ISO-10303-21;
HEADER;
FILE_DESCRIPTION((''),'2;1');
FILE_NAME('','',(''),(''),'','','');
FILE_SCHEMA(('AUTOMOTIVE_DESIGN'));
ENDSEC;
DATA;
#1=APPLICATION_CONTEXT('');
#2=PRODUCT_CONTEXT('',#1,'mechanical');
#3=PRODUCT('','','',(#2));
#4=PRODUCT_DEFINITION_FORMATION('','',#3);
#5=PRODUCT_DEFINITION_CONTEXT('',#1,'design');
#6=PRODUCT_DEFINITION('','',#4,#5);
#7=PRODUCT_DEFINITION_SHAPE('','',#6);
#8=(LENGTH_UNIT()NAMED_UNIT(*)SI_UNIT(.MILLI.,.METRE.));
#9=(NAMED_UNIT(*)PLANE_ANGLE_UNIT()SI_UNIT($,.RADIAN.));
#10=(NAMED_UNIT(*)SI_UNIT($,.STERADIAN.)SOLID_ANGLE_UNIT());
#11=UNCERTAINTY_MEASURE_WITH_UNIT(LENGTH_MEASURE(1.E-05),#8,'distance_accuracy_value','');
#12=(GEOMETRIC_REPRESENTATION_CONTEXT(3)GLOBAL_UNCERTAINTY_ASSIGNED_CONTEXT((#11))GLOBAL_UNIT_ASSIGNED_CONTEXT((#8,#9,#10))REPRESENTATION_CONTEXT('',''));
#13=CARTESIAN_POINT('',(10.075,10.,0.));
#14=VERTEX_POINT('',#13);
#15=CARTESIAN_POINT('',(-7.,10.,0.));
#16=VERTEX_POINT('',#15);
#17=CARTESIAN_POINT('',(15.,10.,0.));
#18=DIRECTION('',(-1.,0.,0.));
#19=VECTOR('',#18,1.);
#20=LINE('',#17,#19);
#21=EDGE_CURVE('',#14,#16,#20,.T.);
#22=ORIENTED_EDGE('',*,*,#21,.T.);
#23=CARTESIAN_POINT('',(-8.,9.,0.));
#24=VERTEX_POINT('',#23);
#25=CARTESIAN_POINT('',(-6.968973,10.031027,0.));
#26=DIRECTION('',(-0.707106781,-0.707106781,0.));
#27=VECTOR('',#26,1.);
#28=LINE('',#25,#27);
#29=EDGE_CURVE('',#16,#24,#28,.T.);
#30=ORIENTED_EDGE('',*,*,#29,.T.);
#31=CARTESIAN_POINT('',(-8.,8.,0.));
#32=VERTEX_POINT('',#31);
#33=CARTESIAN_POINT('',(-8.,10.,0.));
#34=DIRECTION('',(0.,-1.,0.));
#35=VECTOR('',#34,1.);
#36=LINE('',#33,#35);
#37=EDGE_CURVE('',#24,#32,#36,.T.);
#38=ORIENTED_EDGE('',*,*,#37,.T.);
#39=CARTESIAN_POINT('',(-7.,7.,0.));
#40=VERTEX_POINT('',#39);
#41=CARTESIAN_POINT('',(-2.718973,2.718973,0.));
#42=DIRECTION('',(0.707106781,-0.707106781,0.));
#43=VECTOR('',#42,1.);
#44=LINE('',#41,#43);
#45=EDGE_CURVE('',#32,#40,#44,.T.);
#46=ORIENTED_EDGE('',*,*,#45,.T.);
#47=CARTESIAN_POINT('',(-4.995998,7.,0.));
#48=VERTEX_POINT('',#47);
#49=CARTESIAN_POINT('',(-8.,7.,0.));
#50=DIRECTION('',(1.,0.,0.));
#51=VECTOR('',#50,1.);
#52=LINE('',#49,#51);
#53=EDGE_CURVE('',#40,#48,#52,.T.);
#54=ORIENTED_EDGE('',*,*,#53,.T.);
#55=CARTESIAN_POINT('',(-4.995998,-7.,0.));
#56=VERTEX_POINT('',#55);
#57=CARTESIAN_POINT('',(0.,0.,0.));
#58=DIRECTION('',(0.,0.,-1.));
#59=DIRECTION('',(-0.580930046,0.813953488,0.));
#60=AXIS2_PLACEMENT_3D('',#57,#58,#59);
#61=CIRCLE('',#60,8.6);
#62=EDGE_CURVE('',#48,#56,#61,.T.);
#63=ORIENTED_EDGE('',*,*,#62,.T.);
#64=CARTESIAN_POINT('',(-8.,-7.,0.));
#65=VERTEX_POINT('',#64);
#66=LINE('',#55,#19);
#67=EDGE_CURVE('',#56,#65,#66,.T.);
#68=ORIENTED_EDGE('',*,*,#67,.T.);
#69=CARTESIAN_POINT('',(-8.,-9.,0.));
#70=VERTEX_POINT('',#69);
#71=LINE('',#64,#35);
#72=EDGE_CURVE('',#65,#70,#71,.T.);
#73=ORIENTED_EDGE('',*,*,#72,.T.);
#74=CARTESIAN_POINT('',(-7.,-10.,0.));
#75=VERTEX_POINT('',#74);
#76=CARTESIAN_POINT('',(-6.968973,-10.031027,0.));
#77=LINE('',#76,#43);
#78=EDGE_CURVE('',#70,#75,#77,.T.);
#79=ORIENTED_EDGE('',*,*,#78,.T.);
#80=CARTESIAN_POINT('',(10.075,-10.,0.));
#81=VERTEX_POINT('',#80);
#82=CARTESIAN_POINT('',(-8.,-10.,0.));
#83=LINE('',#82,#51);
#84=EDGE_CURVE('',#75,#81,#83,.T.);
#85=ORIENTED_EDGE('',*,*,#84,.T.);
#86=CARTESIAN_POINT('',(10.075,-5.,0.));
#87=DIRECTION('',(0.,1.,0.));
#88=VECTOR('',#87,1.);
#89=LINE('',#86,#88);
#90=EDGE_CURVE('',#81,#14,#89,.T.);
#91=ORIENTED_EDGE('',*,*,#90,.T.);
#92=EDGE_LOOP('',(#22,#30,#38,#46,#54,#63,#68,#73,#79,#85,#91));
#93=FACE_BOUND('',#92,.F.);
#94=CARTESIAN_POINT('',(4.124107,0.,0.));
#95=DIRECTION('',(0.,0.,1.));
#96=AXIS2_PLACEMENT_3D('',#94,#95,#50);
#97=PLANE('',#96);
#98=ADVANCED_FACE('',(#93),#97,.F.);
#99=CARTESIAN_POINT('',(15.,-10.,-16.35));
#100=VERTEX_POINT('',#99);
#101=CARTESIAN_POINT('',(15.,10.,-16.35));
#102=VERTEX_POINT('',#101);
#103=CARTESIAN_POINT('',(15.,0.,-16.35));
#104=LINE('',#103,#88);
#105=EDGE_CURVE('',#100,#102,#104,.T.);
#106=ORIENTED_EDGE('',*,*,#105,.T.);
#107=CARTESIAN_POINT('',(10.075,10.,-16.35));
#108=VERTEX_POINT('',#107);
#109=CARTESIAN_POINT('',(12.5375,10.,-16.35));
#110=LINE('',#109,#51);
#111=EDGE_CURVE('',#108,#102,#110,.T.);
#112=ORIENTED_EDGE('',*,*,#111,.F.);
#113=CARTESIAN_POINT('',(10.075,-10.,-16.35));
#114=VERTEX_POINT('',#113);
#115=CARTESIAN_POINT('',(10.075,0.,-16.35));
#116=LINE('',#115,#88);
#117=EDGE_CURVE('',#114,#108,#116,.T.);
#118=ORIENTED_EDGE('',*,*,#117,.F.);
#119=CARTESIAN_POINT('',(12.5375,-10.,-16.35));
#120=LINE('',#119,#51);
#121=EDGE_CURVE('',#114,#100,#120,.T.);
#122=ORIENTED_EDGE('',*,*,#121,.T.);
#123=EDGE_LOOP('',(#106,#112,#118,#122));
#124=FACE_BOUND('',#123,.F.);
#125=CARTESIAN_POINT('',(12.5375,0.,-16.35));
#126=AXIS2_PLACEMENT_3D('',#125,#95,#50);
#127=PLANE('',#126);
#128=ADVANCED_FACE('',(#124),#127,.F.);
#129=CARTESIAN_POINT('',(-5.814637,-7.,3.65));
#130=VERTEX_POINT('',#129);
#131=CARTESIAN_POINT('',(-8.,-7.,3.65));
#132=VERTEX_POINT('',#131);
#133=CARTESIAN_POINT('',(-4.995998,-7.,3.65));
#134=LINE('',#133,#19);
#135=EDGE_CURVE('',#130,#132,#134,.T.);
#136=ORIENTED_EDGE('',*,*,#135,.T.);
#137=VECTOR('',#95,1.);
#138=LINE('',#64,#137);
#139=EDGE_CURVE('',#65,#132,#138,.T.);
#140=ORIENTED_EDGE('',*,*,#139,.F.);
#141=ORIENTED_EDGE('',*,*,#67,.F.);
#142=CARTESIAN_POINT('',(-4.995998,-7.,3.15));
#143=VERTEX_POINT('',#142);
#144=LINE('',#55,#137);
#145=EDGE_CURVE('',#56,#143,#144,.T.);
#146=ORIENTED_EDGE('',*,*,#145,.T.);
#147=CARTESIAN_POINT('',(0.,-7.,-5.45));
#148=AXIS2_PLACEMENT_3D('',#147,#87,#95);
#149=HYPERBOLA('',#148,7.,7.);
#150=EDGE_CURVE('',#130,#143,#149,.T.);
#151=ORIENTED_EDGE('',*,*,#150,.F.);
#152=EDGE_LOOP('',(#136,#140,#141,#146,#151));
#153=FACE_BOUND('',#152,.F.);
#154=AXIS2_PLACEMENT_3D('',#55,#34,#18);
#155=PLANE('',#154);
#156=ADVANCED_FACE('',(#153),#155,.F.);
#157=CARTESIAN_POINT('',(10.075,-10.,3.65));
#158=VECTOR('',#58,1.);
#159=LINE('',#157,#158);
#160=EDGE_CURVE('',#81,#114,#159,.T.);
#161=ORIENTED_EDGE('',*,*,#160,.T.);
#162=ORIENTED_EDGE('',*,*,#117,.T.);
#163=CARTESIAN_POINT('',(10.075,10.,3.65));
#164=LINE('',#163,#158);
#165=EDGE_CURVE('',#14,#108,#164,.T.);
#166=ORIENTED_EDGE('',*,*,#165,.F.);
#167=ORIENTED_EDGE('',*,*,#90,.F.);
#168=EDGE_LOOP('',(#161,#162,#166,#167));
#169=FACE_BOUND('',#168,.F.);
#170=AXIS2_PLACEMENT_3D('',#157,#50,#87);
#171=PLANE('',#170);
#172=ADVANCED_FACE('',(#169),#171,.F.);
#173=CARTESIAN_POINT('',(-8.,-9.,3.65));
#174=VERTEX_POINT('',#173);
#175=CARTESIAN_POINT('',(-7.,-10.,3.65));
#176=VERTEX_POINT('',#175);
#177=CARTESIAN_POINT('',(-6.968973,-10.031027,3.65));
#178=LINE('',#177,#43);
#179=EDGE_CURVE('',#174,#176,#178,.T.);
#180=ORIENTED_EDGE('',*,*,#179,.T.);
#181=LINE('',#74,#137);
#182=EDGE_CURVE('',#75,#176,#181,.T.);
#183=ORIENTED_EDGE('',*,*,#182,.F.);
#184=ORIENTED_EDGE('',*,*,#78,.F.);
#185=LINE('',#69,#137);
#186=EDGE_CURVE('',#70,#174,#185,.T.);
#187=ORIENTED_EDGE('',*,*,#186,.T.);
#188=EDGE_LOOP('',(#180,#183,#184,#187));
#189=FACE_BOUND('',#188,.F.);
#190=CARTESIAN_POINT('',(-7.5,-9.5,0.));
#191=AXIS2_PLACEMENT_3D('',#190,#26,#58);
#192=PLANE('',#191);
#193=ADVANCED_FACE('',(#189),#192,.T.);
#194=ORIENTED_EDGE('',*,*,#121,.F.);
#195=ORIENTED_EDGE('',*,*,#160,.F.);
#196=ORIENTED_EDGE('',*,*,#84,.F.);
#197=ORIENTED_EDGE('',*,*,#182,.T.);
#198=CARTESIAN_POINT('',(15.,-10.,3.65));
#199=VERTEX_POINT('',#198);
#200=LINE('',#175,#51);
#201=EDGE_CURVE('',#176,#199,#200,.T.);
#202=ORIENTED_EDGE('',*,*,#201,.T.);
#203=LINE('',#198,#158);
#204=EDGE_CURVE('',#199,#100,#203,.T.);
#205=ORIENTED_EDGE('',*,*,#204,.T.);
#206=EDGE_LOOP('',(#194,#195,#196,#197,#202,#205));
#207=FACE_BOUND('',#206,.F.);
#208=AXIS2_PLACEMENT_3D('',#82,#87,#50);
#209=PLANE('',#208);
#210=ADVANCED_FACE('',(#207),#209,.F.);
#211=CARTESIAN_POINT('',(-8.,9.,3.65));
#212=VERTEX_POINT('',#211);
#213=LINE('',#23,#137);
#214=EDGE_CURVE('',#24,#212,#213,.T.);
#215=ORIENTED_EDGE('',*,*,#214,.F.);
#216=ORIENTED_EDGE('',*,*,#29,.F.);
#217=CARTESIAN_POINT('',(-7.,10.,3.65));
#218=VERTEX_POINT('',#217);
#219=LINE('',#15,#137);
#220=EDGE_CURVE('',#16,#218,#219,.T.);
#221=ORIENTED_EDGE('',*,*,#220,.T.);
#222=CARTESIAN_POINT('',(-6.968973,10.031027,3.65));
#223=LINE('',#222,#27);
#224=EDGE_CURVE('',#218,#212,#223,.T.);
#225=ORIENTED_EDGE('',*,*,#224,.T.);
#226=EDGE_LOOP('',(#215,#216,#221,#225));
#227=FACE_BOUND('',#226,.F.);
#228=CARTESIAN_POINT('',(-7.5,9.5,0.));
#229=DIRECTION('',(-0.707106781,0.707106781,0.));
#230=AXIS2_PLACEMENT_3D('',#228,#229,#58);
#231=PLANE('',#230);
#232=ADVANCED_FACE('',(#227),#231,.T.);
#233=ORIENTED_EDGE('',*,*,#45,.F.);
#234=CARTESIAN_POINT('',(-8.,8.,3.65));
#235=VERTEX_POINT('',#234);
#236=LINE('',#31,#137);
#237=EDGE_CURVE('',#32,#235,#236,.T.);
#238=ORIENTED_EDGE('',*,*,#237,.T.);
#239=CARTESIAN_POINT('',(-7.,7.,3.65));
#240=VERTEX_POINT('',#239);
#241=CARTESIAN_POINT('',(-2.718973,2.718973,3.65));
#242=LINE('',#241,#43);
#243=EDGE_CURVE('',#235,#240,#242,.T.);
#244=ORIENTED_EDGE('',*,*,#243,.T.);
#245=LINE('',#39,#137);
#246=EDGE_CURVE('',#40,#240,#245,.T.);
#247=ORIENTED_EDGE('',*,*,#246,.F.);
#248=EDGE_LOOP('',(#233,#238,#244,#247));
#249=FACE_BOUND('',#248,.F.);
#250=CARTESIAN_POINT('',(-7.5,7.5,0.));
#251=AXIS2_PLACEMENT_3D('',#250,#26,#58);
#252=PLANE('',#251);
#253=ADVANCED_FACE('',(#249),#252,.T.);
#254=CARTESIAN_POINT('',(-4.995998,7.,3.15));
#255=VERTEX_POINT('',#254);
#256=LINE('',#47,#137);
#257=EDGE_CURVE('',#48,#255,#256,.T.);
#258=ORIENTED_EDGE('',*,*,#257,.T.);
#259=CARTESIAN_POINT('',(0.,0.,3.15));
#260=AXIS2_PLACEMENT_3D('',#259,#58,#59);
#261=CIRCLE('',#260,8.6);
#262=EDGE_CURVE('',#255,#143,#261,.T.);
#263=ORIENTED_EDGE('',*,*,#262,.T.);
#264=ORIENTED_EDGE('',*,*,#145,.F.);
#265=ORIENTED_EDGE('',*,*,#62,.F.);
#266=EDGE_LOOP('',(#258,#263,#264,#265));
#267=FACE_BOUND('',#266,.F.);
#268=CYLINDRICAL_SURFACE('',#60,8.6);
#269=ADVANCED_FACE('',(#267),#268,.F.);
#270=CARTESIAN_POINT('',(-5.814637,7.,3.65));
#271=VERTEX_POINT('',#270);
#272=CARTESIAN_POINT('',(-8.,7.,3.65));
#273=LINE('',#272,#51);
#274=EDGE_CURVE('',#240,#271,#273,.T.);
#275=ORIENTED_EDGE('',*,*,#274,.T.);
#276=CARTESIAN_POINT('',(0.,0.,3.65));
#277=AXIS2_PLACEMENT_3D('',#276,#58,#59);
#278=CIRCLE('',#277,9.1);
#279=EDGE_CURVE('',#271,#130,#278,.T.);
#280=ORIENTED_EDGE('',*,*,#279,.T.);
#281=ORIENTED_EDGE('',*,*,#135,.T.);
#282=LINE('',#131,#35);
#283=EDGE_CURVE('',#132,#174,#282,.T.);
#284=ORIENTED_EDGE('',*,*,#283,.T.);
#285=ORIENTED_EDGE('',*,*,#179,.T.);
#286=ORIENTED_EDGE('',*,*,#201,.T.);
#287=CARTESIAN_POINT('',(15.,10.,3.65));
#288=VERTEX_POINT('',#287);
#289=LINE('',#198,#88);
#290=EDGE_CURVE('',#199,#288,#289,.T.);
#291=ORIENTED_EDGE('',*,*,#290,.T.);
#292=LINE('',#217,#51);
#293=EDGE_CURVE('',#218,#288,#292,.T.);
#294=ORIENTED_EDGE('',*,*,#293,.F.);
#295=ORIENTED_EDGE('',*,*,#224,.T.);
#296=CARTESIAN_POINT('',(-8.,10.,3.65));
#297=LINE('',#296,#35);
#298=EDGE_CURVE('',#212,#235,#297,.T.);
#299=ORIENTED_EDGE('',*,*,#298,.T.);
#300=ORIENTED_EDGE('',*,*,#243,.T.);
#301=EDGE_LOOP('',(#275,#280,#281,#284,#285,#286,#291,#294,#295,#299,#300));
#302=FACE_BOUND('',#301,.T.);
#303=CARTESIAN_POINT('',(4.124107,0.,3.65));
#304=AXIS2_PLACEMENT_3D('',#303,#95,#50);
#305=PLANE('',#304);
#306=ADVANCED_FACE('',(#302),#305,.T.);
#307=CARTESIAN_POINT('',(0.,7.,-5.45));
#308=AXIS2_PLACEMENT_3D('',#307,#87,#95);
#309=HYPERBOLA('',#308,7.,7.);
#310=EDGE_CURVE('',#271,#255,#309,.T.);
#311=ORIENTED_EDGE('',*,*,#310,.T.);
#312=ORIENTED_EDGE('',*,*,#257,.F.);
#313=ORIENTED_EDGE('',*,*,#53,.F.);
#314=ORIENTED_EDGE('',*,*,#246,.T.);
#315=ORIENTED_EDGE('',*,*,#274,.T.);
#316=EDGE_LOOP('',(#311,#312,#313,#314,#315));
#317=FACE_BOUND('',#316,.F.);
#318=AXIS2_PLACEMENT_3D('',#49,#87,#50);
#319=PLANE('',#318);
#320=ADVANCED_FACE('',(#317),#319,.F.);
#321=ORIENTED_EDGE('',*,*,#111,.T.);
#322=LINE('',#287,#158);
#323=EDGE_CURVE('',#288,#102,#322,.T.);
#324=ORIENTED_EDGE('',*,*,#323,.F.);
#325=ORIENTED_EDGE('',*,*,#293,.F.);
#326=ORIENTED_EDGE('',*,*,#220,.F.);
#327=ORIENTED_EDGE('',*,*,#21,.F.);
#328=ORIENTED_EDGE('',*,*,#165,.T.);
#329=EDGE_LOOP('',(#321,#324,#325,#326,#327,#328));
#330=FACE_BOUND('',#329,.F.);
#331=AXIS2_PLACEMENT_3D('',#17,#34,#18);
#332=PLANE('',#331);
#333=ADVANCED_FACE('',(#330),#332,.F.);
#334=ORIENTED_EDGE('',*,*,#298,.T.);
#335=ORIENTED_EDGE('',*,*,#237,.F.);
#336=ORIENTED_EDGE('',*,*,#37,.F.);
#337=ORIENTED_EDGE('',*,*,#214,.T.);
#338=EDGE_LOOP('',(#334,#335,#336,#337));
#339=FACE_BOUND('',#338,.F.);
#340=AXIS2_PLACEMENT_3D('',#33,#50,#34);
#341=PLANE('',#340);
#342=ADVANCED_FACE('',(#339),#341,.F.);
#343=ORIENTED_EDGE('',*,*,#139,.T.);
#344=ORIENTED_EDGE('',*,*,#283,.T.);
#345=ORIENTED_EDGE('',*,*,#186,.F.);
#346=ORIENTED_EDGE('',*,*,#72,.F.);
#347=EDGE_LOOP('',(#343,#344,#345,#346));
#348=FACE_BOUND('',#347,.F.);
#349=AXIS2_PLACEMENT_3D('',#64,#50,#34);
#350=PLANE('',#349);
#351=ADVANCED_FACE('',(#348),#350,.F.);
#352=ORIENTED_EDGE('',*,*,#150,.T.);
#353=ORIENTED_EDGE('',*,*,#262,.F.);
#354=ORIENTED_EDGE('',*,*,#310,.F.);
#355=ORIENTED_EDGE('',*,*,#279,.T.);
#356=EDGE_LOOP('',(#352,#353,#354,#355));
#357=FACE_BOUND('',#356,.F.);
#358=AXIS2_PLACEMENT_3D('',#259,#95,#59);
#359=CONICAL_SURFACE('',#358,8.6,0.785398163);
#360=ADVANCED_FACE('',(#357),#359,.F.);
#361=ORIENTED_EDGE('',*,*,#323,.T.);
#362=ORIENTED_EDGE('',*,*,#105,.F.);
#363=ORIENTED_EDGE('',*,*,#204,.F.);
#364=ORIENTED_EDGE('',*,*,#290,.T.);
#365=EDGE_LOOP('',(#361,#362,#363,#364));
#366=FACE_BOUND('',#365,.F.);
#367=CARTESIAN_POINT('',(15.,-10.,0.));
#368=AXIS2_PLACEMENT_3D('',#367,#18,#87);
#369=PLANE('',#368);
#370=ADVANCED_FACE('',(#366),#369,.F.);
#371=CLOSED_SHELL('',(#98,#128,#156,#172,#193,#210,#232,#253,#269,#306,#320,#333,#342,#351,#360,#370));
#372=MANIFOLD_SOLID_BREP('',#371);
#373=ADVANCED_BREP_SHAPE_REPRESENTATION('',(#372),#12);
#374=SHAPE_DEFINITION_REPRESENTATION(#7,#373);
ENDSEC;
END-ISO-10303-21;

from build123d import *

# Parameters (mm, degrees)
F1_DEPTH = 3.65
F2_SIZE  = 1
F3_SIZE  = 0.5
F4_W     = 4.925
F4_H     = 20
F5_DEPTH = 20


with BuildPart() as f1:
    # F0 (on Top) → F1 (new body)
    with BuildSketch(Plane.XY):
        with BuildLine():
            ThreePointArc((-4.9959983987, 7), (8.6, 0), (-4.9959983987, -7))
            Line((-4.9959983987, -7), (-8, -7))
            Line((-8, -7), (-8, -10))
            Line((-8, -10), (8, -10))
            Line((8, -10), (15, -10))
            Line((15, -10), (15, 10))
            Line((15, 10), (8, 10))
            Line((8, 10), (-8, 10))
            Line((-8, 10), (-8, 7))
            Line((-8, 7), (-4.9959983987, 7))
        make_face()
    extrude(amount=F1_DEPTH)

    # F2
    f2_edges = [f1.edges().sort_by_distance(p)[0] for p in [
        (-8, 10, 1.825),
        (-8, 7, 1.825),
        (-8, -10, 1.825),
    ]]
    chamfer(f2_edges, length=F2_SIZE)

    # F3
    f3_edges = [f1.edges().sort_by_distance(p)[0] for p in [
        (8.6, 0, 3.65),
    ]]
    chamfer(f3_edges, length=F3_SIZE)

    # F4 (on face) → F5 (join)
    with BuildSketch(Plane.XY.offset(3.65)):
        with Locations((12.5375, 0)):
            Rectangle(F4_W, F4_H)
    extrude(amount=-F5_DEPTH)


solid = f1.part
